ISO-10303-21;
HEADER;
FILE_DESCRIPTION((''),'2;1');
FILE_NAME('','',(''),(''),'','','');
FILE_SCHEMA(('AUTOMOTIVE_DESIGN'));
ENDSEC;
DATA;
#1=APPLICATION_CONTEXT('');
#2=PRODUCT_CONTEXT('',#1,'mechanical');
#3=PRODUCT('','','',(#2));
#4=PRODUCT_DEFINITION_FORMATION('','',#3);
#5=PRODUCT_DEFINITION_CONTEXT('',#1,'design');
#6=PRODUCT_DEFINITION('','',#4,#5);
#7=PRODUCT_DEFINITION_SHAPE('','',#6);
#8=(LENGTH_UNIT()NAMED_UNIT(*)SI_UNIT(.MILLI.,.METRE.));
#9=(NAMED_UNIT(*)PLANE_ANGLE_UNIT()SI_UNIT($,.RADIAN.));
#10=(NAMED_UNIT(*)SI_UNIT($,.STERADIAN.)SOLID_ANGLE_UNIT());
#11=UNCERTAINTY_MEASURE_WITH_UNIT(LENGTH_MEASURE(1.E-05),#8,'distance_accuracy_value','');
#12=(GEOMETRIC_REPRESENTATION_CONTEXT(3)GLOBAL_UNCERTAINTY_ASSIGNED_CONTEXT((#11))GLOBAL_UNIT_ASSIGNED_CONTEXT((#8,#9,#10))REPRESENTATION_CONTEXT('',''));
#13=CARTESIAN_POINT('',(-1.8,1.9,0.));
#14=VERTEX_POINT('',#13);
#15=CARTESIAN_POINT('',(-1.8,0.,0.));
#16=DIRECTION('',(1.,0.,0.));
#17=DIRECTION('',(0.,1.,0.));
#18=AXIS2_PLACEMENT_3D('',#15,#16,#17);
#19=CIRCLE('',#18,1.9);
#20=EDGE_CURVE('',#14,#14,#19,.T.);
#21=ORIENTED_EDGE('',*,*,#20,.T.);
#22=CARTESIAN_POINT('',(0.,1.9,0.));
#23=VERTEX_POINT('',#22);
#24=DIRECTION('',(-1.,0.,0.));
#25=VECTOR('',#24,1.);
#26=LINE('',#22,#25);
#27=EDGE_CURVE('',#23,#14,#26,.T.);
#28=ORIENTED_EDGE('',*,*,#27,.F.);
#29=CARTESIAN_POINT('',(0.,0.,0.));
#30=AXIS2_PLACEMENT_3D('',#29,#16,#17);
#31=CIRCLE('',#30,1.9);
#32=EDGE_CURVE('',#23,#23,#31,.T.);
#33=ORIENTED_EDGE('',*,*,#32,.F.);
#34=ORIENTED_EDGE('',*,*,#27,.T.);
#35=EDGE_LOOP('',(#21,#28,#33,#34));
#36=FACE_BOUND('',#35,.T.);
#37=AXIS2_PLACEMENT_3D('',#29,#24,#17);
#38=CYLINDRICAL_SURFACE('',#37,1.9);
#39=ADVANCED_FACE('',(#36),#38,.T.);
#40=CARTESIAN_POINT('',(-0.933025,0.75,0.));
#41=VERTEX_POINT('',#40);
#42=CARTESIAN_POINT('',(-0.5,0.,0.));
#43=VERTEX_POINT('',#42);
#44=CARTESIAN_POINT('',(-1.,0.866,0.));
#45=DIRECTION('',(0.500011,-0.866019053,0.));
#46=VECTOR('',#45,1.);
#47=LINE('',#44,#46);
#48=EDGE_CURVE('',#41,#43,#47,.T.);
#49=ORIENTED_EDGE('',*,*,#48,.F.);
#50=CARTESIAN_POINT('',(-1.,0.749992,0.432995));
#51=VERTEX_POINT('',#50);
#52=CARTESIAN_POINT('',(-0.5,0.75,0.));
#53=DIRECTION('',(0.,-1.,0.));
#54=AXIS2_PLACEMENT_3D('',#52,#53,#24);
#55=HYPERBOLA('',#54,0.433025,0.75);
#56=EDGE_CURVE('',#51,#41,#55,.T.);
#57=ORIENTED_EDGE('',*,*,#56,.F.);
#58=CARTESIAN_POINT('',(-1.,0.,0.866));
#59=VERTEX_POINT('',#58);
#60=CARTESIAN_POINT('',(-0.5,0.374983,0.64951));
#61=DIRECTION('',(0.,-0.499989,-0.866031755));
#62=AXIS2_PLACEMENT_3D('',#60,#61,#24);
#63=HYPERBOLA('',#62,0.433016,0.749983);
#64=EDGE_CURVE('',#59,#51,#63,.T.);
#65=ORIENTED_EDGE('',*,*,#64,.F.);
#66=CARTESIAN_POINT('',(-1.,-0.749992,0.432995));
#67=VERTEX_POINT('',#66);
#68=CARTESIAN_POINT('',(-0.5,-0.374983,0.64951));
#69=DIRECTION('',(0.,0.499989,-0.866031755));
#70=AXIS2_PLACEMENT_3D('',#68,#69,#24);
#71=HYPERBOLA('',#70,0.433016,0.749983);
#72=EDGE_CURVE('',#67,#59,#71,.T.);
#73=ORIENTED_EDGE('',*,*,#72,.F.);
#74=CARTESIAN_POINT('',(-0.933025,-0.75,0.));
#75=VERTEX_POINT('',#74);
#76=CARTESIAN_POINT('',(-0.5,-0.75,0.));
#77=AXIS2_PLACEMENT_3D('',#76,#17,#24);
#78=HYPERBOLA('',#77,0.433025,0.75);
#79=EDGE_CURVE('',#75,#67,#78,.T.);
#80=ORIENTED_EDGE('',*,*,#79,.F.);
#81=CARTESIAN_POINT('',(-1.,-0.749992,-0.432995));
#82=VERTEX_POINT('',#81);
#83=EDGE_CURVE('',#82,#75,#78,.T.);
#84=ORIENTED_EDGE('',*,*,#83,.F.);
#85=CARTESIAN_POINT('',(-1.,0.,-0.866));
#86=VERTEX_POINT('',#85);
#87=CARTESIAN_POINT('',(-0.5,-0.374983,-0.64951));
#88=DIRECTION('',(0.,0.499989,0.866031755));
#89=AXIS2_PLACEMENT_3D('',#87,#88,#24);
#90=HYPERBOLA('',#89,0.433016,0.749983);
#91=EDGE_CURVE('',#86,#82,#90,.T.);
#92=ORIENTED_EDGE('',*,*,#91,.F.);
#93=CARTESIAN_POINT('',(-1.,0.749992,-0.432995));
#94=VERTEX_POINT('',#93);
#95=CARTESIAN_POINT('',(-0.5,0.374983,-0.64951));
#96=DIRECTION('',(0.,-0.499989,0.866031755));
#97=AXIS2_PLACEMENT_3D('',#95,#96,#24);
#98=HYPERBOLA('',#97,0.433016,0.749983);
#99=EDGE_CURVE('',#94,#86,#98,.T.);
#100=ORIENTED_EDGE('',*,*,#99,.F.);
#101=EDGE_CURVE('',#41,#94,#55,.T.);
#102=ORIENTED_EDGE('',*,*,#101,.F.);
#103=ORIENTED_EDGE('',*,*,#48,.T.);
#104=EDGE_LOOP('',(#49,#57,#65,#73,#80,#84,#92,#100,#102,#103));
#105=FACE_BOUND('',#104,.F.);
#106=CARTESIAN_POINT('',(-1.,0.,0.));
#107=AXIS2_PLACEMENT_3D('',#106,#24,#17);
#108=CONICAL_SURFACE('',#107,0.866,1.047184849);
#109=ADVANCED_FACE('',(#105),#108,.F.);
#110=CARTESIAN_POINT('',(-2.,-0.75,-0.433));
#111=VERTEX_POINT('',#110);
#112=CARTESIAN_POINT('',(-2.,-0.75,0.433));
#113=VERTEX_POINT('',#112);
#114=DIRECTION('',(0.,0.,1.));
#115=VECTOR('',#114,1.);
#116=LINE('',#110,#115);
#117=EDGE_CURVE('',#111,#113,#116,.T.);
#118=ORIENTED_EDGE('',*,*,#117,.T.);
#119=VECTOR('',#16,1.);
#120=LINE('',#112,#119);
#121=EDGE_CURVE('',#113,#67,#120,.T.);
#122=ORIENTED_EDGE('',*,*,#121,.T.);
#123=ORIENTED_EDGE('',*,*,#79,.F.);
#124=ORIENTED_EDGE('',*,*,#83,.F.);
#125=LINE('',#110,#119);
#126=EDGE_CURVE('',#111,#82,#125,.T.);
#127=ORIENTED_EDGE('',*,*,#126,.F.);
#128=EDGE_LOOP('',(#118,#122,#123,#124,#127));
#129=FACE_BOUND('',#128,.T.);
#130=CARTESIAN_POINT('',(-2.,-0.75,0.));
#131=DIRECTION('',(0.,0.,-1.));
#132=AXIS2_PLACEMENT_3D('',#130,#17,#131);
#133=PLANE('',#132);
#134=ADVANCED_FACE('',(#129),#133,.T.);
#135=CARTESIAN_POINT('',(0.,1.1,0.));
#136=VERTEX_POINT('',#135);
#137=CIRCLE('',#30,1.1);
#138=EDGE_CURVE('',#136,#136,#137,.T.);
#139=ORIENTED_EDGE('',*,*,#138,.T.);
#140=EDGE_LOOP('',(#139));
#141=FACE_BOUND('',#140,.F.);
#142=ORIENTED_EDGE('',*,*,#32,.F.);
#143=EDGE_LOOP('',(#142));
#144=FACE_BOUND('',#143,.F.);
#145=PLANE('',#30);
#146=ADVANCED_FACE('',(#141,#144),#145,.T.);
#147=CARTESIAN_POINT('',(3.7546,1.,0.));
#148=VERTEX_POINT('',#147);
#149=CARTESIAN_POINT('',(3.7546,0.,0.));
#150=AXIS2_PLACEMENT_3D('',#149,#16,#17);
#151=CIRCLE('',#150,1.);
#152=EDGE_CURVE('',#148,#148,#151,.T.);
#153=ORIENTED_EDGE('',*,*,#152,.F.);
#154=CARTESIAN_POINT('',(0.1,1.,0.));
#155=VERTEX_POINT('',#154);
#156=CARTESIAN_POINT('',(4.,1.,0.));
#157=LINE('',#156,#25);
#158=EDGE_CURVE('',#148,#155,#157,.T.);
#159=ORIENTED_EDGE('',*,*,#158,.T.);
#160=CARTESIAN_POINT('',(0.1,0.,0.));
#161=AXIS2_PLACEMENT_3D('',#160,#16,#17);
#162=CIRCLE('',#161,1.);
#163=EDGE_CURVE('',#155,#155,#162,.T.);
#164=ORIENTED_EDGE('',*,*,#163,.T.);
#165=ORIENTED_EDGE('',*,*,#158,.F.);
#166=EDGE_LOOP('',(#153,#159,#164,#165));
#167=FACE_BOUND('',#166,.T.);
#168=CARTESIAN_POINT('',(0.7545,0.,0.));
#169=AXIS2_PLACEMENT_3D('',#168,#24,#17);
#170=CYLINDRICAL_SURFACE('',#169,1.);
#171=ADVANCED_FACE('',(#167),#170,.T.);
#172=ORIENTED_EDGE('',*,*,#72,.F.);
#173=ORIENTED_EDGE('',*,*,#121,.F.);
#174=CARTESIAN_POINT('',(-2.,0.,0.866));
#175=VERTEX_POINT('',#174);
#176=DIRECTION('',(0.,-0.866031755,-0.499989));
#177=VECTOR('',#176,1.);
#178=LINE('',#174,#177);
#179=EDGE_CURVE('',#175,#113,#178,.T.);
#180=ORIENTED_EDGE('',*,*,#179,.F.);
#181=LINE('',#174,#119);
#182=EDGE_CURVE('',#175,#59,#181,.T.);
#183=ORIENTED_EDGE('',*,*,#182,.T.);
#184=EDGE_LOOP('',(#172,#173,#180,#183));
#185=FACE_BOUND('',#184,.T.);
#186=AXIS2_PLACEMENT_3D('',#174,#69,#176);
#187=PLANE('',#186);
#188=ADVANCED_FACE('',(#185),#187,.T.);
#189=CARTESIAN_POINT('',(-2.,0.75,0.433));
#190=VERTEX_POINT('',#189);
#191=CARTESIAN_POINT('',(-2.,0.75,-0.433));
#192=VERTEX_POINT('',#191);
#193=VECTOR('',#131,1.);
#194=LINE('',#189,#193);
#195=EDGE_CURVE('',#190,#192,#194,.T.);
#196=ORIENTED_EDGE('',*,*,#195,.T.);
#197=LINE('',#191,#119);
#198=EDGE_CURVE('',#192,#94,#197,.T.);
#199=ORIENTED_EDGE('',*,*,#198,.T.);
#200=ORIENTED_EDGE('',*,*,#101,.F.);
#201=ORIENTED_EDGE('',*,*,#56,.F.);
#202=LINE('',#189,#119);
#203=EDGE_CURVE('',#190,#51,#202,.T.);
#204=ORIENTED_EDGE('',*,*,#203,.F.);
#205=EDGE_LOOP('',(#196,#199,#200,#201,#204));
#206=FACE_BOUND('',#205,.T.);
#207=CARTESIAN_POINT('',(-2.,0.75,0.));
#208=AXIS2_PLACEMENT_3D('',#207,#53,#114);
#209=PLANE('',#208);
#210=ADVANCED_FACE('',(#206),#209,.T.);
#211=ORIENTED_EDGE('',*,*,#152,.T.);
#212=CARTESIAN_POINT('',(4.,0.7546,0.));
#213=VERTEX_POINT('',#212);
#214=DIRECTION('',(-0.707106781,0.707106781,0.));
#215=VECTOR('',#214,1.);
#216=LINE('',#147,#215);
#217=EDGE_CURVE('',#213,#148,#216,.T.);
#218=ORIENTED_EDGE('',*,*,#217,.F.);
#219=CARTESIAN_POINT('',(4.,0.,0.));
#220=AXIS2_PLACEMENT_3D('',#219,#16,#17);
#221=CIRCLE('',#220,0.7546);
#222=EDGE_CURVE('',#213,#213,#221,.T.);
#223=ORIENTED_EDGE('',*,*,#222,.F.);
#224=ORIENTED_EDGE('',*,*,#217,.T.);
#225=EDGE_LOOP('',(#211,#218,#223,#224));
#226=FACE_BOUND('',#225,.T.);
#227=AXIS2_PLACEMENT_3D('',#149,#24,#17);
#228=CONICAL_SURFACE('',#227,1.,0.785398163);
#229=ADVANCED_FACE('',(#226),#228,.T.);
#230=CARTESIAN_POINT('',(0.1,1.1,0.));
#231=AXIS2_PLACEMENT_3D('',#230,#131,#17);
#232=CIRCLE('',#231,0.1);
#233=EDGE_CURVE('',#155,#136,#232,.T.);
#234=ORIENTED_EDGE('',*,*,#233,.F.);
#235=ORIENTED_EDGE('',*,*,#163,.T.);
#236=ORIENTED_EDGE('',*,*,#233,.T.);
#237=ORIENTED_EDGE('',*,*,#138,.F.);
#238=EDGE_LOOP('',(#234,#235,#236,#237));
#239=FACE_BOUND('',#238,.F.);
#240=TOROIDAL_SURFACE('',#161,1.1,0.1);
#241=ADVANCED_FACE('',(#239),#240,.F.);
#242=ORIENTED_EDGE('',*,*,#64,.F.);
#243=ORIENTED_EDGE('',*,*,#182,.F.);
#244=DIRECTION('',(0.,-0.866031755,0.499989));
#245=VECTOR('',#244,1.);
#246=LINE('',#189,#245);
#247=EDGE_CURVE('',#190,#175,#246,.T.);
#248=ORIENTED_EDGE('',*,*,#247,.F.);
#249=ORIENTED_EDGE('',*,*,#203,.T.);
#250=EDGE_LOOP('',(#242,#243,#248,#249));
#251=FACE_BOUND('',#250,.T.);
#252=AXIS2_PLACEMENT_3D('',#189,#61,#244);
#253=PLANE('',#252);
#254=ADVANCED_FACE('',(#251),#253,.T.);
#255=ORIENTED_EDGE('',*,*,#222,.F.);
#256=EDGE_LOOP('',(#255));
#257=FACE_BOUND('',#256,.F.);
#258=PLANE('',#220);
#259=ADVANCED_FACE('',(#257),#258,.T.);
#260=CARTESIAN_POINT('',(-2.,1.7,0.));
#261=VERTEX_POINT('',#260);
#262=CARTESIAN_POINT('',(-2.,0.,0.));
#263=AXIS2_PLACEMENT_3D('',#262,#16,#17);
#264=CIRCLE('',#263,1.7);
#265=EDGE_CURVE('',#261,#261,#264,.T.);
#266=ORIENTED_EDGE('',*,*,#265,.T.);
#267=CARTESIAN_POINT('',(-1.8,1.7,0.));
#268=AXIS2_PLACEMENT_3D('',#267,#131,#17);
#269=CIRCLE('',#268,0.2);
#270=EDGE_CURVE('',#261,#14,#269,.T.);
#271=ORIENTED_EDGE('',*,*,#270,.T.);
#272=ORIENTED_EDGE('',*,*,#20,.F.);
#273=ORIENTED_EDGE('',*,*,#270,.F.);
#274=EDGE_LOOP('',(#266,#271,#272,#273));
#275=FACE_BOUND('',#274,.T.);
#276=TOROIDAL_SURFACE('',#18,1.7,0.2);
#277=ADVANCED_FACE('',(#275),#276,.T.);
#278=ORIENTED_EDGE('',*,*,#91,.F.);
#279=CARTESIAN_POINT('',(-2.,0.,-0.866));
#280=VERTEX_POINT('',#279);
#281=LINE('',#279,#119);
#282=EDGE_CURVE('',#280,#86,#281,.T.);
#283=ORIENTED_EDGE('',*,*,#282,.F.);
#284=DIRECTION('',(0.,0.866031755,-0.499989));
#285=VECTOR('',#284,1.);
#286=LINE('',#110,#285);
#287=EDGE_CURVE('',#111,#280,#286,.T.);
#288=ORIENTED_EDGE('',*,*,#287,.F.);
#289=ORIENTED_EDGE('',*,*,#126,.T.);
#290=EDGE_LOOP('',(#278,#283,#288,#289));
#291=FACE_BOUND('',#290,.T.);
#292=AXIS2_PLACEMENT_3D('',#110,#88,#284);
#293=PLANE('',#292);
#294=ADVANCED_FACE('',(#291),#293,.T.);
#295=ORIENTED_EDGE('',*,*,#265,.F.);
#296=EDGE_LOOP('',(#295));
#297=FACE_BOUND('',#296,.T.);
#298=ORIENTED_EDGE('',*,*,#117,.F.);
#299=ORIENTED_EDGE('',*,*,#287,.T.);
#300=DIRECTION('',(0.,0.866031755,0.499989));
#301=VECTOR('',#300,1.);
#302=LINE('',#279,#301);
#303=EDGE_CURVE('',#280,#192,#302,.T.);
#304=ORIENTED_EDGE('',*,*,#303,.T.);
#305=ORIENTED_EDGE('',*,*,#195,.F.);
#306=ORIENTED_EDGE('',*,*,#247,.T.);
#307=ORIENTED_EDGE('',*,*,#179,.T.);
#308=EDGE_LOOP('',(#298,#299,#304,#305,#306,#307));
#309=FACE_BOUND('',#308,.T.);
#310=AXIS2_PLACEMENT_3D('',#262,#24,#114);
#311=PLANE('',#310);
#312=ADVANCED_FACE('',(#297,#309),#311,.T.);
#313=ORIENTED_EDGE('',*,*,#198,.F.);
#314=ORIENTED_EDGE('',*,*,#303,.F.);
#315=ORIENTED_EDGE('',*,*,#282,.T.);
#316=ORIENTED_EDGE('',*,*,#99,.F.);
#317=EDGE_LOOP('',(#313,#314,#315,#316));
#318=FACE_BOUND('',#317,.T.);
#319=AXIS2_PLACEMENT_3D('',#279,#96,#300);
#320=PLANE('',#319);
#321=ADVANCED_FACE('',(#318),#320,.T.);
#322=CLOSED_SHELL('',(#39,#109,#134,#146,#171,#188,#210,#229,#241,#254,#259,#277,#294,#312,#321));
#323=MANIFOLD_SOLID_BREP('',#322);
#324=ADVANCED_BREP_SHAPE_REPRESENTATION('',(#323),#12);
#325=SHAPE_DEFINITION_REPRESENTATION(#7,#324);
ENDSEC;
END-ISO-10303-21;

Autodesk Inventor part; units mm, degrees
ref_plane "YZ Plane" through (0, 0, 0) normal (1, 0, 0) x (0, 1, 0)
ref_plane "XZ Plane" through (0, 0, 0) normal (0, 1, 0) x (-1, 0, 0)
sketch "Skizze1" plane through (0, 0, 0) normal (0, 0, 1) x (1, 0, 0)
  line L0 (-0.5, 0) -> (4, 0)
  line L1 (4, 0) -> (4, 1)
  line L2 (4, 1) -> (1, 1)
  line L3 (1, 1) -> (0.7545, 1)
  line L4 (0.7545, 1) -> (0, 1)
  line L5 (0, 1) -> (0, 1.9)
  line L6 (0, 1.9) -> (-2, 1.9)
  line L7 (-2, 1.9) -> (-2, 0.866)
  line L8 (-2, 0.866) -> (-1, 0.866)
  line L9 (-1, 0.866) -> (-0.5, 0)
  line L10 (-3.2, 0) -> (5.2, 0) projected
  line L11 (0, -0.38) -> (0, 2.28) projected
  line L12 (1, 1) -> (0, 1) construction
  dimension "d1" = 3
  dimension "d2" = 0.2455
  dimension "d3" = 2
  dimension "d4" = 1
  dimension "d5" = 60
  dimension "d6" = 2
  dimension "d7" = 2
  dimension "d8" = 1.7321
  dimension "d9" = 3.8
  dimension "d26" = 4
revolve "Körper" add sketch "Skizze1" angle 360 about axis through (-0.5, 0, 0) along (1, 0, 0)
sketch "Skizze2" plane through (-2, 0, 0) normal (-1, 0, 0) x (0, 0, 1)
  circle A0 centre (0, 0) radius 0.866 projected
  line L0 (0, -2.66) -> (0, 2.66) projected
  line L1 (-2.66, 0) -> (2.66, 0) projected
  line L2 (0.866, 0) -> (0.433, -0.75)
  line L3 (0.433, -0.75) -> (-0.433, -0.75)
  line L4 (-0.433, -0.75) -> (-0.866, 0)
  line L5 (-0.866, 0) -> (-0.433, 0.75)
  line L6 (-0.433, 0.75) -> (0.433, 0.75)
  line L7 (0.433, 0.75) -> (0.866, 0)
extrude "Loch" add sketch "Skizze2" against normal up to next contours L7 A0 | A0 L2 | L6 L0 A0 | A0 L0 L3 | L0 L6 A0 | A0 L3 L0 | L4 A0 | A0 L5
fillet "Rundung1" radius 0.2 1 edges at (-2, -1.9, 0)
thread "Gewinde" size "M2x0.4" class "6g" standard "ISO Metric profile" length 3
chamfer "Fase1" distance 0.2454 distance2 0.2454 1 edges at (4, -1, 0) measured on face at (4, -0.4588, -0.3309)
ref_plane "Work Plane1" through (29, 0, 0) normal (0, -1, 0) x (1, 0, 0)
fillet "Fillet2" radius 0.1 1 edges at (0, -1, 0)
equation "\"d1\" = GEL"
equation "\"d3\" = KOH"
equation "\"d4\" = INTI"
equation "\"d6\" = GD"
equation "\"d7\" = BDM"
equation "\"d8\" = 1.1547 * SW"
equation "\"d9\" = KOD"
equation "\"d26\" = NLG"
equation "\"d30\" = R"
equation "\"d17\" = RR"
equation "\"d13\" = GEL"
equation "\"d15\" = -0.5 * SPD + 0.5 * GD"
equation "\"d16\" = GUL"
equation "\"GD\" = 2"
equation "\"NLG\" = 4"
equation "\"GEL\" = 3"
equation "\"KOD\" = 3.8"
equation "\"KOH\" = 2"
equation "\"INTI\" = 1"
equation "\"GAL\" = 0.61345 * PTC"
equation "\"GUL\" = 0.61345 * PTC"
equation "\"BDM\" = NND"
equation "\"SW\" = 1.5"
equation "\"RR\" = 0.2"
equation "\"SPD\" = NND - 1.2269 * PTC"
equation "\"R\" = 0.1"
equation "\"TOA\" = 30deg"
equation "\"GD1\" = THREADDIA - 1.2269 * PTC"
equation "\"THREADDIA\" = 2"
equation "\"FAWI\" = 45deg"
equation "\"PTC\" = 0.4"
equation "\"NND\" = 2"
equation "\"E0\" = 1.155 * SW"
properties part number "ISO 4762 - M2 x 4" material "Edelstahl, 440C"
